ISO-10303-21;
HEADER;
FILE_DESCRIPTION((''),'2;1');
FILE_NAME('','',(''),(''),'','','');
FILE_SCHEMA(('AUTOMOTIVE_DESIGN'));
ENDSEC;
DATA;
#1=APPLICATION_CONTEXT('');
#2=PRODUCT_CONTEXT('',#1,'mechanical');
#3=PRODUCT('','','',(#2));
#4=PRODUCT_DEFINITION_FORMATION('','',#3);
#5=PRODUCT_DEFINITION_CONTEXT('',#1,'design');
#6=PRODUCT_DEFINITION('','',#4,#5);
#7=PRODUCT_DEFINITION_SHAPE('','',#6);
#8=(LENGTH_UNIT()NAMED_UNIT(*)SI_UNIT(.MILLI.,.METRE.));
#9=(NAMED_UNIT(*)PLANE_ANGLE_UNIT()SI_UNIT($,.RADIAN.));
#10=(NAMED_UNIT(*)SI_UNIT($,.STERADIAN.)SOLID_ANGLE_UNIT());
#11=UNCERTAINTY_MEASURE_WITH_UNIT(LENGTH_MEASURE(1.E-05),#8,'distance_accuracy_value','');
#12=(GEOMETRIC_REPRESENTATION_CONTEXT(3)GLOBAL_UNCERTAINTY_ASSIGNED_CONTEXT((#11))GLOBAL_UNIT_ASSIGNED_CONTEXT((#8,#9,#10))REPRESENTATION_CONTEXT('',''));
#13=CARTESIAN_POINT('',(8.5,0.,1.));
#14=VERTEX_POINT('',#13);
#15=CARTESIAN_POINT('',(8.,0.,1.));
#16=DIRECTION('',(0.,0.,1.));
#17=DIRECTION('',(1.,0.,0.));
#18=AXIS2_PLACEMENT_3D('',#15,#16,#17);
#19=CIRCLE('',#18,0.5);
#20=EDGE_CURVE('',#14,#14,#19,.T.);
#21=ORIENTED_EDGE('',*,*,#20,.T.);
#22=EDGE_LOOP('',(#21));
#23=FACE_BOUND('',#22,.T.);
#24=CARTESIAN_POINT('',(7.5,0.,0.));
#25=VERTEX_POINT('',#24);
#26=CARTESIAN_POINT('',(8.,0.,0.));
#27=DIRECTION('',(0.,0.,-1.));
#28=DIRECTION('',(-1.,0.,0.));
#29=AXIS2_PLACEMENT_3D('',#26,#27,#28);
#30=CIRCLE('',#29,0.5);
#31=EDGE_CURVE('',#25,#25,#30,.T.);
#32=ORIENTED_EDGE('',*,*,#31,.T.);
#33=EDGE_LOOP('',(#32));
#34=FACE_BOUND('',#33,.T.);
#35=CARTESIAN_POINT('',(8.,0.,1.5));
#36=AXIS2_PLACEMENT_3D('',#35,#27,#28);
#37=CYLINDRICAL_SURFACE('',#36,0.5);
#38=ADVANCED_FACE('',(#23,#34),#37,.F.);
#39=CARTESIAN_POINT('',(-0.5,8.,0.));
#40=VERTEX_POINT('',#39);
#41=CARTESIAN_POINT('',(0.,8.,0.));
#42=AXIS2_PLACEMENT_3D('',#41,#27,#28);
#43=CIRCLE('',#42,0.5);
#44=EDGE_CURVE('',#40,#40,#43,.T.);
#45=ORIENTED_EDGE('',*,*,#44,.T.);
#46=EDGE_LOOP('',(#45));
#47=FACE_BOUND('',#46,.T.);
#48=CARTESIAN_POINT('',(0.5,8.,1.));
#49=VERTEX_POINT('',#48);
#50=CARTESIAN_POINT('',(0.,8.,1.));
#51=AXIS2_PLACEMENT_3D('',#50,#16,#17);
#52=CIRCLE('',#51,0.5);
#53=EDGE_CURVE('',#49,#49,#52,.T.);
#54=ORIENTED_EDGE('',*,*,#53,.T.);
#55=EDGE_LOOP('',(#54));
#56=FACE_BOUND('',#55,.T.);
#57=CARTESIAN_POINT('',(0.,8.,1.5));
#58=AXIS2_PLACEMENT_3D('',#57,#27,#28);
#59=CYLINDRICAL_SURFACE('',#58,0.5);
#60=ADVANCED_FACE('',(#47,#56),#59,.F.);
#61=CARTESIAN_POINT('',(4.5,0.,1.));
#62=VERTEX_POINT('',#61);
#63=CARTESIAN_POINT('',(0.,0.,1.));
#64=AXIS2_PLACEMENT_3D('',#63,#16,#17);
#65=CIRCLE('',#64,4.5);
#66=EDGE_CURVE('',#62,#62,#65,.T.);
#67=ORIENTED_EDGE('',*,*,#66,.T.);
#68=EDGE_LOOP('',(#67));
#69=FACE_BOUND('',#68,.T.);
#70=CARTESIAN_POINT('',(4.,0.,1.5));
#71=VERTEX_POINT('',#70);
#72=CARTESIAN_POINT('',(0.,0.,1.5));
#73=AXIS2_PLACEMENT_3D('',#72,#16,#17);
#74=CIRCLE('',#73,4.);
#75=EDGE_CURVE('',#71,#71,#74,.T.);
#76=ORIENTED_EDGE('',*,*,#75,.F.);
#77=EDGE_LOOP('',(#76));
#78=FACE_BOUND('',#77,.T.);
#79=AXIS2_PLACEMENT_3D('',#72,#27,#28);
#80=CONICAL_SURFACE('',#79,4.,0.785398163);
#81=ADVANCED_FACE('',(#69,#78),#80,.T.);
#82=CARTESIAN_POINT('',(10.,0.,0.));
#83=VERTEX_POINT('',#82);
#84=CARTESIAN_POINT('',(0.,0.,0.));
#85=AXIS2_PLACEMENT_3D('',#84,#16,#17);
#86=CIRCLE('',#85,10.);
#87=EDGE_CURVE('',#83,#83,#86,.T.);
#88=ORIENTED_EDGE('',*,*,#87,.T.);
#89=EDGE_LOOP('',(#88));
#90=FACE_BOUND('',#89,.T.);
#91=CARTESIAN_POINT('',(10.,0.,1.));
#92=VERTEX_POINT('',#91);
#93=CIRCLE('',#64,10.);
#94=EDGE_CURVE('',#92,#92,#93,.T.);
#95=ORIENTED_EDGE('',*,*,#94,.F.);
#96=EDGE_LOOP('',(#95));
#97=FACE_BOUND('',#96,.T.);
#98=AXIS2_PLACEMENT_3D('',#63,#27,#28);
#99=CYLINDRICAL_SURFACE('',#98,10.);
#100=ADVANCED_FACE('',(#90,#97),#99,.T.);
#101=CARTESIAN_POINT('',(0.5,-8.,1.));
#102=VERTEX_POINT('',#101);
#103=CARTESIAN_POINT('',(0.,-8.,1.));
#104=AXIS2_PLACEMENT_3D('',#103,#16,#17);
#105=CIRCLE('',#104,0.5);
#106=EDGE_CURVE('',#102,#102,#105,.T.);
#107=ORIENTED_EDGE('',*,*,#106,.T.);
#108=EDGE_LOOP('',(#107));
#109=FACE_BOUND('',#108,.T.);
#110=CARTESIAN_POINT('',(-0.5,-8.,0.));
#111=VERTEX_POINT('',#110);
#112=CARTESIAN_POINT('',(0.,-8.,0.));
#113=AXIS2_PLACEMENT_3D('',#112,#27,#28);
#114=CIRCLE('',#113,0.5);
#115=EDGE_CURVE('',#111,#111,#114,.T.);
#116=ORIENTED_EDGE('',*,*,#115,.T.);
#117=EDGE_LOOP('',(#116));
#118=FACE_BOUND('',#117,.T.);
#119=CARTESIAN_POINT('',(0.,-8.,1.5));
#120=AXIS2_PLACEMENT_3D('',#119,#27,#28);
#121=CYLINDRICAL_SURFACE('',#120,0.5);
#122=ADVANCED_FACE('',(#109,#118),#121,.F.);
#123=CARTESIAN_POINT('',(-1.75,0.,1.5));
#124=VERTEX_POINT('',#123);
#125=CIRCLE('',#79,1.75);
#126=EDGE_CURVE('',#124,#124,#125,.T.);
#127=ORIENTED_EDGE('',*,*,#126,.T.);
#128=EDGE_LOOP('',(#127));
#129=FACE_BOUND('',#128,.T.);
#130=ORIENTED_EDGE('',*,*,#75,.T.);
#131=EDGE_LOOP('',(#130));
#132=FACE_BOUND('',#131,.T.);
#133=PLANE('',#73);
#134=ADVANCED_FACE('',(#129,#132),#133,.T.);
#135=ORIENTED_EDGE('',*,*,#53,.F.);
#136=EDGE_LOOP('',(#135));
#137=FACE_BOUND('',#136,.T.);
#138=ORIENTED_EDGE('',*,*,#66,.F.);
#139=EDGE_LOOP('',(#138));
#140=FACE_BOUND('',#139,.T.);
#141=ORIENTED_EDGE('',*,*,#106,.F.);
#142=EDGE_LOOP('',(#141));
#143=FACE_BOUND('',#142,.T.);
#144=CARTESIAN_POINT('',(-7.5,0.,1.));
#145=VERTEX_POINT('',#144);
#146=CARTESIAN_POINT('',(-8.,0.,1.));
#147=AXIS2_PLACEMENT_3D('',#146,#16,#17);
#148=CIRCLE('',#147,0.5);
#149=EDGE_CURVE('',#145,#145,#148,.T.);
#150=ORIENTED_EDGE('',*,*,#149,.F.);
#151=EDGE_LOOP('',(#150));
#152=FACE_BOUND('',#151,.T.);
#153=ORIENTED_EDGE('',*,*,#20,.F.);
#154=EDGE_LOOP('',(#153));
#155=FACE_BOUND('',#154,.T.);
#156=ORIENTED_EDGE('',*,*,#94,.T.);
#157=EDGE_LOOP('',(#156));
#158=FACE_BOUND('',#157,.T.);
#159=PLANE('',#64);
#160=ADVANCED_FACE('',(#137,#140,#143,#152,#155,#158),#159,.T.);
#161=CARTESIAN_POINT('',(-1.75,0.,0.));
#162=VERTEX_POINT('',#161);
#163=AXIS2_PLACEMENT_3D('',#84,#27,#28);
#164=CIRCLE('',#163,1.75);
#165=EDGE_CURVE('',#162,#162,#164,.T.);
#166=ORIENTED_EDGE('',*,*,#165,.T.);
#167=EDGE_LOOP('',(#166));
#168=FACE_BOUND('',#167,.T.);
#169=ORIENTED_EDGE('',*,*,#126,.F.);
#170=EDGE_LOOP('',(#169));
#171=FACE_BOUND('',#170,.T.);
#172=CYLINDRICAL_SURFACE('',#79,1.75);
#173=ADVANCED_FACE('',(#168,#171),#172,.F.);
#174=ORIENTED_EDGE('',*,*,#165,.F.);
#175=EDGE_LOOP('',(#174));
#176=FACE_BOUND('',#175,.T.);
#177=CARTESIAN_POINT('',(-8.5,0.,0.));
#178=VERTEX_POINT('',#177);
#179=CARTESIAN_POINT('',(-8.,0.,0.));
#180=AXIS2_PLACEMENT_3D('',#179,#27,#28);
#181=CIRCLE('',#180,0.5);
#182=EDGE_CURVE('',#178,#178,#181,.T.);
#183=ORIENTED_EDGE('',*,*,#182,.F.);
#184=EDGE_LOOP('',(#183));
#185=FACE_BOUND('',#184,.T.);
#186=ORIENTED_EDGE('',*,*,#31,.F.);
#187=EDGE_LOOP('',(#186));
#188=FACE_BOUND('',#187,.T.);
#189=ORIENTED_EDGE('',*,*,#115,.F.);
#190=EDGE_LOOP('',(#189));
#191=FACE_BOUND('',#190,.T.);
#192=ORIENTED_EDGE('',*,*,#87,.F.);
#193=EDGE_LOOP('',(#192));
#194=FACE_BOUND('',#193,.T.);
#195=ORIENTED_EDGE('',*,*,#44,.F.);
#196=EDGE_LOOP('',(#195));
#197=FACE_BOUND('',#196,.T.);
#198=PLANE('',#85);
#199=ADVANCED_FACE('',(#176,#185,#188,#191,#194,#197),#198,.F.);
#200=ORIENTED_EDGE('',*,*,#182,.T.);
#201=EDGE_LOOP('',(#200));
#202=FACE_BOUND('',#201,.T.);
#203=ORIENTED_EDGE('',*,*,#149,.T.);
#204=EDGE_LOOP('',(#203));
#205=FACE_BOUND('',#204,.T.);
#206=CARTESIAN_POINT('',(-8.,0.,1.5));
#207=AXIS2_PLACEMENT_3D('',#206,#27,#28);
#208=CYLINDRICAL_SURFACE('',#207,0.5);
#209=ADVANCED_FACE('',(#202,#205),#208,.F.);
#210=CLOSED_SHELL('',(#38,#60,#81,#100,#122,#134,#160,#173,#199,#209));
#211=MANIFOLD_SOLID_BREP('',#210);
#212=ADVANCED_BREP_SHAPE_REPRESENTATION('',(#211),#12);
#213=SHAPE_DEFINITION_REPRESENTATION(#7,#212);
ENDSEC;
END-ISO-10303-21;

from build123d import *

# Parameters (mm, degrees)
SKETCH_1_R          = 10
EXTRUDE_1_DEPTH     = 1
SKETCH_2_R          = 4.5
EXTRUDE_2_DEPTH     = 0.5
CHAMFER_1_SIZE      = 0.5
SKETCH_3_R          = 1.75
CUT_EXTRUDE_1_DEPTH = 15.221462653
SKETCH_4_R          = 0.5
CUT_EXTRUDE_2_DEPTH = 15.221462653


with BuildPart() as part:
    # 草图1 → 凸台-拉伸1 (new body)
    with BuildSketch(Plane.XY):
        Circle(SKETCH_1_R)
    extrude(amount=EXTRUDE_1_DEPTH)

    # 草图2 → 凸台-拉伸2 (add)
    with BuildSketch(Plane.XY.offset(1)):
        Circle(SKETCH_2_R)
    extrude(amount=EXTRUDE_2_DEPTH)

    # 倒角1
    chamfer_1_edges = [part.edges().sort_by_distance(p)[0] for p in [
        (-4.5, 0, 1.5),
    ]]
    chamfer(chamfer_1_edges, length=CHAMFER_1_SIZE - 0.0001)  # a hair under: the kernel refuses the full size

    # 草图3 → 切除-拉伸1 (cut, through all)
    with BuildSketch(Plane(origin=(0, 0, 0), x_dir=(-1, 0, 0), z_dir=(0, 0, -1))):
        Circle(SKETCH_3_R)
    extrude(amount=-CUT_EXTRUDE_1_DEPTH, mode=Mode.SUBTRACT)

    # 草图4 → 切除-拉伸2 (cut, through all)
    with BuildSketch(Plane(origin=(0, 0, 0), x_dir=(-1, 0, 0), z_dir=(0, 0, -1))):
        with Locations((0, 8)):
            Circle(SKETCH_4_R)
        with Locations((8, 0)):
            Circle(SKETCH_4_R)
        with Locations((0, -8)):
            Circle(SKETCH_4_R)
        with Locations((-8, 0)):
            Circle(SKETCH_4_R)
    extrude(amount=-CUT_EXTRUDE_2_DEPTH, mode=Mode.SUBTRACT)


solid = part.part
